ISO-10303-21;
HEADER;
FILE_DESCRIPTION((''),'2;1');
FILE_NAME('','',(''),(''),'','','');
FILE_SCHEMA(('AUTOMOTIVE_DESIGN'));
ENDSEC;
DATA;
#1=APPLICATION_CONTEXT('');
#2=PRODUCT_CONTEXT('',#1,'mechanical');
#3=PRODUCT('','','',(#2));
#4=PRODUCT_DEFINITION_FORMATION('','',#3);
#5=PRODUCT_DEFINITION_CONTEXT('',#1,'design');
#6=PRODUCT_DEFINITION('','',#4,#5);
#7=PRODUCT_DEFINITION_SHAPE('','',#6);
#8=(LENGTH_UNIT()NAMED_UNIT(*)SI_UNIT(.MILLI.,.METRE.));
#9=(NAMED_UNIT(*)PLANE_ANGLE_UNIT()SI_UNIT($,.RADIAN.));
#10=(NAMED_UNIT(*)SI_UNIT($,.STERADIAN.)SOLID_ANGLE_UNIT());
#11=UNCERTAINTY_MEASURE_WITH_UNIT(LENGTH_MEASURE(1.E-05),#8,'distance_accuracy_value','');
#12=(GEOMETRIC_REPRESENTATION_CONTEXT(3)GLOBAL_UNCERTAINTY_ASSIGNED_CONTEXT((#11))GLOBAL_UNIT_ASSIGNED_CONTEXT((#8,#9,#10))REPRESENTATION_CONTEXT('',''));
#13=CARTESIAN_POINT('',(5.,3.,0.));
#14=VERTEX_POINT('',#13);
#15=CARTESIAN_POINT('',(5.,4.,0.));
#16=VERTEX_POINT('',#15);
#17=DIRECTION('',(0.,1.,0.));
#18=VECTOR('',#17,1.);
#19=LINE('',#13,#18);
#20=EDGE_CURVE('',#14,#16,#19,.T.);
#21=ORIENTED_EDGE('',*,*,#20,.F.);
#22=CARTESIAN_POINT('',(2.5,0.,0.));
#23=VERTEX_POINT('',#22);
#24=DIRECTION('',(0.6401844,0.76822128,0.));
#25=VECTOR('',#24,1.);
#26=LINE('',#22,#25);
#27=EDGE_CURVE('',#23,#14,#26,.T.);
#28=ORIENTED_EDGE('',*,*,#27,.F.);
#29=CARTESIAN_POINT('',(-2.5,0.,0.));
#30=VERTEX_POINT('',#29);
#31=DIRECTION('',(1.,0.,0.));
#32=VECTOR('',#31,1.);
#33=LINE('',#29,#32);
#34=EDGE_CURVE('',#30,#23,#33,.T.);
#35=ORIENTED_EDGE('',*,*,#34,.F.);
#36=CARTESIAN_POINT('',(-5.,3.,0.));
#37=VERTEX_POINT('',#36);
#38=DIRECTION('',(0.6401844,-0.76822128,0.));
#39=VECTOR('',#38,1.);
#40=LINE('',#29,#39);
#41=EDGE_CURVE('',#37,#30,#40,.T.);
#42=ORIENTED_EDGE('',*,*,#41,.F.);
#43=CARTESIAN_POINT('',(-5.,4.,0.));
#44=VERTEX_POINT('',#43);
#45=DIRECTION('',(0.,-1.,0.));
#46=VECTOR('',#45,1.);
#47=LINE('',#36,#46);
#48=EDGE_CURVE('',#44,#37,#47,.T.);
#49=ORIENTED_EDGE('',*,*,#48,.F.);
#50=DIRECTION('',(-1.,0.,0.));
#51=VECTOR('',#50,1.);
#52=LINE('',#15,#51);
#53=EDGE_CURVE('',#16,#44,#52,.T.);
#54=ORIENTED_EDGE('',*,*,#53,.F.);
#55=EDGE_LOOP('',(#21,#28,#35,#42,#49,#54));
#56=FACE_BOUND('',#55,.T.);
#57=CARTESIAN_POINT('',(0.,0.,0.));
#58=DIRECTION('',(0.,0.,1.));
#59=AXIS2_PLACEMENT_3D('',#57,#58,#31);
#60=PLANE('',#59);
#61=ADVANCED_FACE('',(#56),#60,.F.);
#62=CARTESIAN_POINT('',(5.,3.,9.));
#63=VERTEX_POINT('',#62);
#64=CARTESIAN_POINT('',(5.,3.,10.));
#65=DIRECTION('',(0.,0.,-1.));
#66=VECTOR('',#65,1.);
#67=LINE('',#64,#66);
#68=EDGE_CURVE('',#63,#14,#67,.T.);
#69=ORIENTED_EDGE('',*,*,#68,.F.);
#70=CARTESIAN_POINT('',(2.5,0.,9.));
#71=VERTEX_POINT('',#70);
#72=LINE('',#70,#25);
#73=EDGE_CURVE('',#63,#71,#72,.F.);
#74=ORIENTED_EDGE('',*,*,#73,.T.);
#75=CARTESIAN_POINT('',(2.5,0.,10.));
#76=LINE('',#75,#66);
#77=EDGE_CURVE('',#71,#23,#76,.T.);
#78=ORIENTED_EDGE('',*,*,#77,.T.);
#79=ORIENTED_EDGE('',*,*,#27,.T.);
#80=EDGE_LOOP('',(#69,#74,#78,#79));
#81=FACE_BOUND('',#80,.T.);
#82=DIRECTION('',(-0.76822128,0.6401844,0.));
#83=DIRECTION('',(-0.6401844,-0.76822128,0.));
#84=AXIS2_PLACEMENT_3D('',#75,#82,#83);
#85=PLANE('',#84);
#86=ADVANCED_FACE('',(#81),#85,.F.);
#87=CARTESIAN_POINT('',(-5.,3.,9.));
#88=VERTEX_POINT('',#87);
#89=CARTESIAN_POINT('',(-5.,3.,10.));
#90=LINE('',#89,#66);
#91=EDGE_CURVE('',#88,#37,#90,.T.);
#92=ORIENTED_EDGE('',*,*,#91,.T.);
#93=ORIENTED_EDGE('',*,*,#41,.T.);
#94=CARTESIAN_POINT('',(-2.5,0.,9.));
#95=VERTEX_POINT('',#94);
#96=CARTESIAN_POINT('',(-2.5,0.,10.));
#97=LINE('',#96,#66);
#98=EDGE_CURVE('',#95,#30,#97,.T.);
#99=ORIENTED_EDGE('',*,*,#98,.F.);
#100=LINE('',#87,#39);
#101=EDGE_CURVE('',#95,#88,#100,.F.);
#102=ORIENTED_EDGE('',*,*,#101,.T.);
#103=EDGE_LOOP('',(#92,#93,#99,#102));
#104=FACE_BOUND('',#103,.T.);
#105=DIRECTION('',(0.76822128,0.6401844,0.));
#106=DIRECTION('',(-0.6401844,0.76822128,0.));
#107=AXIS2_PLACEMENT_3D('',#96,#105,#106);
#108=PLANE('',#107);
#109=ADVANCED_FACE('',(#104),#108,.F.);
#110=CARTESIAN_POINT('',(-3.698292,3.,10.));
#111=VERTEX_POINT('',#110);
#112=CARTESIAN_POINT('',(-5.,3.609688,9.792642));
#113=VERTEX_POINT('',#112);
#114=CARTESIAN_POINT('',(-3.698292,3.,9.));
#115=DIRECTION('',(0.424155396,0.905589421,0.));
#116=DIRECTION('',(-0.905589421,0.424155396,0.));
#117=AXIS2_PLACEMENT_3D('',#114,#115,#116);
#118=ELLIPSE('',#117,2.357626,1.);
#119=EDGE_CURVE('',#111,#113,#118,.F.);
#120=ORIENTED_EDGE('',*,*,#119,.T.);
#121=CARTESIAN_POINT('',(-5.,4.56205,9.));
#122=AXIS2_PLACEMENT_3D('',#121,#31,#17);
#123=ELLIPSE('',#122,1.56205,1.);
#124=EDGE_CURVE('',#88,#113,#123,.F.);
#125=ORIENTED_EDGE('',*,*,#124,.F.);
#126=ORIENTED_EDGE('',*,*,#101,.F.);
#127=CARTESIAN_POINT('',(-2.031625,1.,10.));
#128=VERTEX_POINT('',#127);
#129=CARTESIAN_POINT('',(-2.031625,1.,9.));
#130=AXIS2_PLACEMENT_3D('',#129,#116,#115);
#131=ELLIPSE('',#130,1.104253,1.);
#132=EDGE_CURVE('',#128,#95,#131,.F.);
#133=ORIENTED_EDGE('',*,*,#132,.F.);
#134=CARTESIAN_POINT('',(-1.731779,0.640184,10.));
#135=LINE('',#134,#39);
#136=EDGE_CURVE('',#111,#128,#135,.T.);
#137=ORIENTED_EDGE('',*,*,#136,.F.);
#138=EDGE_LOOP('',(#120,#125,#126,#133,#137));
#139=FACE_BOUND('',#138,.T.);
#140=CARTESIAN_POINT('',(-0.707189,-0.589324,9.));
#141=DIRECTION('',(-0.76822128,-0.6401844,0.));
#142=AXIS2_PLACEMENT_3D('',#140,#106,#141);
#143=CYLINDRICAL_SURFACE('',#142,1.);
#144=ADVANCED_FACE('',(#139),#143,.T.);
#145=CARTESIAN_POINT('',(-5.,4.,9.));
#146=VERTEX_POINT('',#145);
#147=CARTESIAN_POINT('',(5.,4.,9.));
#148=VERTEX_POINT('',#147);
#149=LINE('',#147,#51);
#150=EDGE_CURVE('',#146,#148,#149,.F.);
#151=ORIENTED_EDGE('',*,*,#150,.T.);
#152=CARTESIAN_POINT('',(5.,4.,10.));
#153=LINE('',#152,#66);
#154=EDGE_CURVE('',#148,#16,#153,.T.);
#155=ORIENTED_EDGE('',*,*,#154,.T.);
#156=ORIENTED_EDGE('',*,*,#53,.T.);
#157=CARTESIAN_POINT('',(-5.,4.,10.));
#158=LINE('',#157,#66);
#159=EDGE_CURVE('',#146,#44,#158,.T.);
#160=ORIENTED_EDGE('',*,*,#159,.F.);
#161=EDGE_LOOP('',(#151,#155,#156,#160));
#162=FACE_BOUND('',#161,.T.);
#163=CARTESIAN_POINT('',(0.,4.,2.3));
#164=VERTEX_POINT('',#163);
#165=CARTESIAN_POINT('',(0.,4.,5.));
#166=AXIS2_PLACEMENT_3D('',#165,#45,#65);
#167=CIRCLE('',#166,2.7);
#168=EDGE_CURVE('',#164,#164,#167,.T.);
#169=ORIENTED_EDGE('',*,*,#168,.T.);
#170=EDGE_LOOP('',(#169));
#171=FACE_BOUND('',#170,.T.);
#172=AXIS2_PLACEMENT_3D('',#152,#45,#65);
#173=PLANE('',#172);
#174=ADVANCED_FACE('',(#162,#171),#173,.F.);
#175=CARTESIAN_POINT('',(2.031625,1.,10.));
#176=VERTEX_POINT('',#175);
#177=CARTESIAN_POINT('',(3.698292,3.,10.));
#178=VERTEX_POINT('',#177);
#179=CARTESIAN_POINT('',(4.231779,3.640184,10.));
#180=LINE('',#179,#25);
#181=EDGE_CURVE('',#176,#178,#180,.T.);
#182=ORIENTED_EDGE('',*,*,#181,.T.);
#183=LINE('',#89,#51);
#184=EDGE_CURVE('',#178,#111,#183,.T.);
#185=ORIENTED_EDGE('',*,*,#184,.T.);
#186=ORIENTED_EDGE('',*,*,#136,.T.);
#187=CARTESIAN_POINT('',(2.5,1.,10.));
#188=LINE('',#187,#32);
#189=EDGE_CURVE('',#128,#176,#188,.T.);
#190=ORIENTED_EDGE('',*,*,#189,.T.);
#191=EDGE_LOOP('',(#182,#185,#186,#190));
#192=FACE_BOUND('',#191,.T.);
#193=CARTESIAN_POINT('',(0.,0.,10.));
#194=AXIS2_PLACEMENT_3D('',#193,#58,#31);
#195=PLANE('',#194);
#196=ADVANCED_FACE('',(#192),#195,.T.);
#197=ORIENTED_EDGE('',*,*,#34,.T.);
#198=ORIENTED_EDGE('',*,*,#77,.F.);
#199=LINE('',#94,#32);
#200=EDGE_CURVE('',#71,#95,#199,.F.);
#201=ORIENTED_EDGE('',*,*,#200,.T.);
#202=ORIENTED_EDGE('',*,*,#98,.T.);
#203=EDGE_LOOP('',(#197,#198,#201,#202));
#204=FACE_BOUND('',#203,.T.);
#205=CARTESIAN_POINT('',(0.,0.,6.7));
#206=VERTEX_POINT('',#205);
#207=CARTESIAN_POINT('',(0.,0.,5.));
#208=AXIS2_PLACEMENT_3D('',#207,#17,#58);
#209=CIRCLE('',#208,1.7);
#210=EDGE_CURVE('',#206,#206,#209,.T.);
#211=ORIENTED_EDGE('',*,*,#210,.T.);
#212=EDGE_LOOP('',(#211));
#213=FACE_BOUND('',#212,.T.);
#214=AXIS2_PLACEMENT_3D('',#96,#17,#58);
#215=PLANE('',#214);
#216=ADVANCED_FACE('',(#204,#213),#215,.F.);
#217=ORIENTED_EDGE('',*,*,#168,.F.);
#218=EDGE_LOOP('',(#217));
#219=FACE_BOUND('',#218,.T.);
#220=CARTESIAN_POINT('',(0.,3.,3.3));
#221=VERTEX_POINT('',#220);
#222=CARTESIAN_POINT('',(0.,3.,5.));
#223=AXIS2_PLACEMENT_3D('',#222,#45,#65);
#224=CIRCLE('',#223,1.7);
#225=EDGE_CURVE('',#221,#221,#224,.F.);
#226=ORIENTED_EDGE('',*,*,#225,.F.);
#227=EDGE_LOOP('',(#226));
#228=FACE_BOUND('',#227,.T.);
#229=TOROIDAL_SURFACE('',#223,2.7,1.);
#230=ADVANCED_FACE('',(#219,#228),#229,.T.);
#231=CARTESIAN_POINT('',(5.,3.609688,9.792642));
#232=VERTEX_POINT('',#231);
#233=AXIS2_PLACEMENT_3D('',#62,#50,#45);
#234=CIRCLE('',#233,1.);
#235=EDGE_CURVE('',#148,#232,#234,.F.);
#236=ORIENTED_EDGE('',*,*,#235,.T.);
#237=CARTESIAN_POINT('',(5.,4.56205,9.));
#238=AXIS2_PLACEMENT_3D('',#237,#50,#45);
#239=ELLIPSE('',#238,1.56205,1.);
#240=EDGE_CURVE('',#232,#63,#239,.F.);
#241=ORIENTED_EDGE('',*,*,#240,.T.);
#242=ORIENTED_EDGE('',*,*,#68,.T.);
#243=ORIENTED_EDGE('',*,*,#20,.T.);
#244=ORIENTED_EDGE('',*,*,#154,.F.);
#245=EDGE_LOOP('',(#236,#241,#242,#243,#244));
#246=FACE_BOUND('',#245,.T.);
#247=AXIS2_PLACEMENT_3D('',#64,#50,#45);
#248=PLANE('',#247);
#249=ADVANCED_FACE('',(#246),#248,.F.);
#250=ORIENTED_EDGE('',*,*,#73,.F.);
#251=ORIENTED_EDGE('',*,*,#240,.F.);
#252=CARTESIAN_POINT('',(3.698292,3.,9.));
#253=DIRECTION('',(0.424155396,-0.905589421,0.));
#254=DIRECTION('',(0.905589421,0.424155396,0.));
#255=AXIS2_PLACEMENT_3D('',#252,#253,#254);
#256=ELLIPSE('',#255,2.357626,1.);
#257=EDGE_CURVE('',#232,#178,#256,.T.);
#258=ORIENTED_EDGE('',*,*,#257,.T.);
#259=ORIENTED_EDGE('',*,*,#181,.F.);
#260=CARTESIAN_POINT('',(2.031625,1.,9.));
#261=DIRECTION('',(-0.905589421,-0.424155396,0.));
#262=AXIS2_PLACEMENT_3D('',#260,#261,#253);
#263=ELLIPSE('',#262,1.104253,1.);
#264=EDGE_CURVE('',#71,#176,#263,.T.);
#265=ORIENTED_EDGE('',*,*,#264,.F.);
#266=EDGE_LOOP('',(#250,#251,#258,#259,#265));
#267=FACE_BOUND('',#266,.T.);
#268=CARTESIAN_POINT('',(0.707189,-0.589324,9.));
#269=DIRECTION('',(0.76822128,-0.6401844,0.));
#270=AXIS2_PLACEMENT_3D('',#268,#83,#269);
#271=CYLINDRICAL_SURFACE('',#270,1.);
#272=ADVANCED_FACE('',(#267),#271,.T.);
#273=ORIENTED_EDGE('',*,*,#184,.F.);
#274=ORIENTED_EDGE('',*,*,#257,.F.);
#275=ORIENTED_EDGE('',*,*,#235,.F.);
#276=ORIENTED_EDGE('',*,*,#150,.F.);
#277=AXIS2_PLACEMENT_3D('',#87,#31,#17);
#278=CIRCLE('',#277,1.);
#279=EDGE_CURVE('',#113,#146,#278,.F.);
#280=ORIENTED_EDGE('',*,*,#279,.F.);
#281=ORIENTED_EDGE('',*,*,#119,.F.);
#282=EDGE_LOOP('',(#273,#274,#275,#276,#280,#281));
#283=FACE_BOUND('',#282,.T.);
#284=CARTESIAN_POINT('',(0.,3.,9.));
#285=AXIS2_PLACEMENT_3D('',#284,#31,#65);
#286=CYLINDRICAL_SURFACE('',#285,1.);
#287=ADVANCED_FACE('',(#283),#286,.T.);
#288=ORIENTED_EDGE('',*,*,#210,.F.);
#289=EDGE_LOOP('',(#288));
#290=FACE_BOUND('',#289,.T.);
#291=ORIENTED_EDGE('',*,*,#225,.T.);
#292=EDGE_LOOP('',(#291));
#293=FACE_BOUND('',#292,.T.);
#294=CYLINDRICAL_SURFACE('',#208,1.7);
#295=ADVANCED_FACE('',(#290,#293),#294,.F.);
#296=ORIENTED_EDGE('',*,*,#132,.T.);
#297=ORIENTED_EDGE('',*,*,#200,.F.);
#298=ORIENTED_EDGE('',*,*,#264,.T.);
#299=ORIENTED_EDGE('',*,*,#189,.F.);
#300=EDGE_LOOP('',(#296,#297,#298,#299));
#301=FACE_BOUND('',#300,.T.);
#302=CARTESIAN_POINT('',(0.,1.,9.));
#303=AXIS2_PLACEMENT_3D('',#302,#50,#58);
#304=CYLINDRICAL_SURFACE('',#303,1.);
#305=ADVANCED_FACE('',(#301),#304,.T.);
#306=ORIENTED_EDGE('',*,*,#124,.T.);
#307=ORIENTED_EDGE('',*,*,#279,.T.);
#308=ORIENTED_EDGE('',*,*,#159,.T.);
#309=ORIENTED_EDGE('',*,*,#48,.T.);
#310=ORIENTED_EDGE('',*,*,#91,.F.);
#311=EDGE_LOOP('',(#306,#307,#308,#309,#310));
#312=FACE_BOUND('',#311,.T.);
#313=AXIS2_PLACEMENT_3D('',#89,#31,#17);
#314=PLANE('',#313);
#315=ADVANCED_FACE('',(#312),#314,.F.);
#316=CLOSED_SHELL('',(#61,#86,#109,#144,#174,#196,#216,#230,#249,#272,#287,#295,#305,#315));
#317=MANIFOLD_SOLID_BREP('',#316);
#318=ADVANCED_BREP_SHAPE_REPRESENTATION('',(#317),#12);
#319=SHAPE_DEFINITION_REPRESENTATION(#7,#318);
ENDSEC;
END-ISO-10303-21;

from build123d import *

# Parameters (mm, degrees)
BOSS_EXTRUDE1_DEPTH = 10
SKETCH3_R           = 1.7
CUT_EXTRUDE1_DEPTH  = 12.874342087
FILLET2_R           = 1


with BuildPart() as part:
    # Sketch1 → Boss-Extrude1 (new body)
    with BuildSketch(Plane.XY):
        Polygon((-2.5, 0), (2.5, 0), (5, 3), (5, 4), (-5, 4), (-5, 3), align=None)
    extrude(amount=BOSS_EXTRUDE1_DEPTH)

    # Sketch3 → Cut-Extrude1 (cut, through all)
    with BuildSketch(Plane(origin=(0, 4, 0), x_dir=(1, 0, 0), z_dir=(0, 1, 0))):
        with Locations(Location((0, -5, 0), (0, 0, 270))):
            Circle(SKETCH3_R)
    extrude(amount=-CUT_EXTRUDE1_DEPTH, mode=Mode.SUBTRACT)

    # Fillet2
    # the kernel refuses this fillet: 1 mm, written as the material it takes off along each edge
    with BuildSketch(Plane(origin=(-5, 0, 10), x_dir=(0, 0, -1), z_dir=(1, 0, 0))) as fillet2_piece_1:
        with BuildLine():
            CenterArc((FILLET2_R, FILLET2_R), FILLET2_R, 180, 90)
            Line((0, FILLET2_R), (0, 0))
            Line((0, 0), (FILLET2_R, 0))
        make_face()
    extrude(amount=10, mode=Mode.SUBTRACT)
    with BuildSketch(Plane(origin=(0.899539001, -1.920553199, 10), x_dir=(-0.768221279597376, 0.6401843996644797, 0), z_dir=(0.6401843996644797, 0.768221279597376, 0))) as fillet2_piece_2:
        with BuildLine():
            CenterArc((FILLET2_R, -FILLET2_R), FILLET2_R, 90, 90)
            Line((0, -FILLET2_R), (0, 0))
            Line((0, 0), (FILLET2_R, 0))
        make_face()
    extrude(amount=8.905124838, mode=Mode.SUBTRACT)
    with BuildSketch(Plane(origin=(-6.600460999, 4.920553199, 10), x_dir=(0, 0, -1), z_dir=(0.6401843996644797, -0.768221279597376, 0))) as fillet2_piece_3:
        with BuildLine():
            CenterArc((FILLET2_R, FILLET2_R), FILLET2_R, 180, 90)
            Line((0, FILLET2_R), (0, 0))
            Line((0, 0), (FILLET2_R, 0))
        make_face()
    extrude(amount=8.905124838, mode=Mode.SUBTRACT)
    with BuildSketch(Plane(origin=(7.5, 4, 10), x_dir=(0, -1, 0), z_dir=(-1, 0, 0))) as fillet2_piece_4:
        with BuildLine():
            CenterArc((FILLET2_R, -FILLET2_R), FILLET2_R, 90, 90)
            Line((0, -FILLET2_R), (0, 0))
            Line((0, 0), (FILLET2_R, 0))
        make_face()
    extrude(amount=15, mode=Mode.SUBTRACT)
    with BuildSketch(Plane(origin=(0, 4, 5), x_dir=(0, 0, 1), z_dir=(-1, 0, 0))) as fillet2_piece_5:
        with BuildLine():
            CenterArc((1.7 + FILLET2_R, -FILLET2_R), FILLET2_R, 90, 90)
            Line((1.7 + FILLET2_R, 0), (1.7, 0))
            Line((1.7, 0), (1.7, -FILLET2_R))
        make_face()
    revolve(axis=Axis((0, 4, 5), (0, 1, 0)), mode=Mode.SUBTRACT)


solid = part.part
